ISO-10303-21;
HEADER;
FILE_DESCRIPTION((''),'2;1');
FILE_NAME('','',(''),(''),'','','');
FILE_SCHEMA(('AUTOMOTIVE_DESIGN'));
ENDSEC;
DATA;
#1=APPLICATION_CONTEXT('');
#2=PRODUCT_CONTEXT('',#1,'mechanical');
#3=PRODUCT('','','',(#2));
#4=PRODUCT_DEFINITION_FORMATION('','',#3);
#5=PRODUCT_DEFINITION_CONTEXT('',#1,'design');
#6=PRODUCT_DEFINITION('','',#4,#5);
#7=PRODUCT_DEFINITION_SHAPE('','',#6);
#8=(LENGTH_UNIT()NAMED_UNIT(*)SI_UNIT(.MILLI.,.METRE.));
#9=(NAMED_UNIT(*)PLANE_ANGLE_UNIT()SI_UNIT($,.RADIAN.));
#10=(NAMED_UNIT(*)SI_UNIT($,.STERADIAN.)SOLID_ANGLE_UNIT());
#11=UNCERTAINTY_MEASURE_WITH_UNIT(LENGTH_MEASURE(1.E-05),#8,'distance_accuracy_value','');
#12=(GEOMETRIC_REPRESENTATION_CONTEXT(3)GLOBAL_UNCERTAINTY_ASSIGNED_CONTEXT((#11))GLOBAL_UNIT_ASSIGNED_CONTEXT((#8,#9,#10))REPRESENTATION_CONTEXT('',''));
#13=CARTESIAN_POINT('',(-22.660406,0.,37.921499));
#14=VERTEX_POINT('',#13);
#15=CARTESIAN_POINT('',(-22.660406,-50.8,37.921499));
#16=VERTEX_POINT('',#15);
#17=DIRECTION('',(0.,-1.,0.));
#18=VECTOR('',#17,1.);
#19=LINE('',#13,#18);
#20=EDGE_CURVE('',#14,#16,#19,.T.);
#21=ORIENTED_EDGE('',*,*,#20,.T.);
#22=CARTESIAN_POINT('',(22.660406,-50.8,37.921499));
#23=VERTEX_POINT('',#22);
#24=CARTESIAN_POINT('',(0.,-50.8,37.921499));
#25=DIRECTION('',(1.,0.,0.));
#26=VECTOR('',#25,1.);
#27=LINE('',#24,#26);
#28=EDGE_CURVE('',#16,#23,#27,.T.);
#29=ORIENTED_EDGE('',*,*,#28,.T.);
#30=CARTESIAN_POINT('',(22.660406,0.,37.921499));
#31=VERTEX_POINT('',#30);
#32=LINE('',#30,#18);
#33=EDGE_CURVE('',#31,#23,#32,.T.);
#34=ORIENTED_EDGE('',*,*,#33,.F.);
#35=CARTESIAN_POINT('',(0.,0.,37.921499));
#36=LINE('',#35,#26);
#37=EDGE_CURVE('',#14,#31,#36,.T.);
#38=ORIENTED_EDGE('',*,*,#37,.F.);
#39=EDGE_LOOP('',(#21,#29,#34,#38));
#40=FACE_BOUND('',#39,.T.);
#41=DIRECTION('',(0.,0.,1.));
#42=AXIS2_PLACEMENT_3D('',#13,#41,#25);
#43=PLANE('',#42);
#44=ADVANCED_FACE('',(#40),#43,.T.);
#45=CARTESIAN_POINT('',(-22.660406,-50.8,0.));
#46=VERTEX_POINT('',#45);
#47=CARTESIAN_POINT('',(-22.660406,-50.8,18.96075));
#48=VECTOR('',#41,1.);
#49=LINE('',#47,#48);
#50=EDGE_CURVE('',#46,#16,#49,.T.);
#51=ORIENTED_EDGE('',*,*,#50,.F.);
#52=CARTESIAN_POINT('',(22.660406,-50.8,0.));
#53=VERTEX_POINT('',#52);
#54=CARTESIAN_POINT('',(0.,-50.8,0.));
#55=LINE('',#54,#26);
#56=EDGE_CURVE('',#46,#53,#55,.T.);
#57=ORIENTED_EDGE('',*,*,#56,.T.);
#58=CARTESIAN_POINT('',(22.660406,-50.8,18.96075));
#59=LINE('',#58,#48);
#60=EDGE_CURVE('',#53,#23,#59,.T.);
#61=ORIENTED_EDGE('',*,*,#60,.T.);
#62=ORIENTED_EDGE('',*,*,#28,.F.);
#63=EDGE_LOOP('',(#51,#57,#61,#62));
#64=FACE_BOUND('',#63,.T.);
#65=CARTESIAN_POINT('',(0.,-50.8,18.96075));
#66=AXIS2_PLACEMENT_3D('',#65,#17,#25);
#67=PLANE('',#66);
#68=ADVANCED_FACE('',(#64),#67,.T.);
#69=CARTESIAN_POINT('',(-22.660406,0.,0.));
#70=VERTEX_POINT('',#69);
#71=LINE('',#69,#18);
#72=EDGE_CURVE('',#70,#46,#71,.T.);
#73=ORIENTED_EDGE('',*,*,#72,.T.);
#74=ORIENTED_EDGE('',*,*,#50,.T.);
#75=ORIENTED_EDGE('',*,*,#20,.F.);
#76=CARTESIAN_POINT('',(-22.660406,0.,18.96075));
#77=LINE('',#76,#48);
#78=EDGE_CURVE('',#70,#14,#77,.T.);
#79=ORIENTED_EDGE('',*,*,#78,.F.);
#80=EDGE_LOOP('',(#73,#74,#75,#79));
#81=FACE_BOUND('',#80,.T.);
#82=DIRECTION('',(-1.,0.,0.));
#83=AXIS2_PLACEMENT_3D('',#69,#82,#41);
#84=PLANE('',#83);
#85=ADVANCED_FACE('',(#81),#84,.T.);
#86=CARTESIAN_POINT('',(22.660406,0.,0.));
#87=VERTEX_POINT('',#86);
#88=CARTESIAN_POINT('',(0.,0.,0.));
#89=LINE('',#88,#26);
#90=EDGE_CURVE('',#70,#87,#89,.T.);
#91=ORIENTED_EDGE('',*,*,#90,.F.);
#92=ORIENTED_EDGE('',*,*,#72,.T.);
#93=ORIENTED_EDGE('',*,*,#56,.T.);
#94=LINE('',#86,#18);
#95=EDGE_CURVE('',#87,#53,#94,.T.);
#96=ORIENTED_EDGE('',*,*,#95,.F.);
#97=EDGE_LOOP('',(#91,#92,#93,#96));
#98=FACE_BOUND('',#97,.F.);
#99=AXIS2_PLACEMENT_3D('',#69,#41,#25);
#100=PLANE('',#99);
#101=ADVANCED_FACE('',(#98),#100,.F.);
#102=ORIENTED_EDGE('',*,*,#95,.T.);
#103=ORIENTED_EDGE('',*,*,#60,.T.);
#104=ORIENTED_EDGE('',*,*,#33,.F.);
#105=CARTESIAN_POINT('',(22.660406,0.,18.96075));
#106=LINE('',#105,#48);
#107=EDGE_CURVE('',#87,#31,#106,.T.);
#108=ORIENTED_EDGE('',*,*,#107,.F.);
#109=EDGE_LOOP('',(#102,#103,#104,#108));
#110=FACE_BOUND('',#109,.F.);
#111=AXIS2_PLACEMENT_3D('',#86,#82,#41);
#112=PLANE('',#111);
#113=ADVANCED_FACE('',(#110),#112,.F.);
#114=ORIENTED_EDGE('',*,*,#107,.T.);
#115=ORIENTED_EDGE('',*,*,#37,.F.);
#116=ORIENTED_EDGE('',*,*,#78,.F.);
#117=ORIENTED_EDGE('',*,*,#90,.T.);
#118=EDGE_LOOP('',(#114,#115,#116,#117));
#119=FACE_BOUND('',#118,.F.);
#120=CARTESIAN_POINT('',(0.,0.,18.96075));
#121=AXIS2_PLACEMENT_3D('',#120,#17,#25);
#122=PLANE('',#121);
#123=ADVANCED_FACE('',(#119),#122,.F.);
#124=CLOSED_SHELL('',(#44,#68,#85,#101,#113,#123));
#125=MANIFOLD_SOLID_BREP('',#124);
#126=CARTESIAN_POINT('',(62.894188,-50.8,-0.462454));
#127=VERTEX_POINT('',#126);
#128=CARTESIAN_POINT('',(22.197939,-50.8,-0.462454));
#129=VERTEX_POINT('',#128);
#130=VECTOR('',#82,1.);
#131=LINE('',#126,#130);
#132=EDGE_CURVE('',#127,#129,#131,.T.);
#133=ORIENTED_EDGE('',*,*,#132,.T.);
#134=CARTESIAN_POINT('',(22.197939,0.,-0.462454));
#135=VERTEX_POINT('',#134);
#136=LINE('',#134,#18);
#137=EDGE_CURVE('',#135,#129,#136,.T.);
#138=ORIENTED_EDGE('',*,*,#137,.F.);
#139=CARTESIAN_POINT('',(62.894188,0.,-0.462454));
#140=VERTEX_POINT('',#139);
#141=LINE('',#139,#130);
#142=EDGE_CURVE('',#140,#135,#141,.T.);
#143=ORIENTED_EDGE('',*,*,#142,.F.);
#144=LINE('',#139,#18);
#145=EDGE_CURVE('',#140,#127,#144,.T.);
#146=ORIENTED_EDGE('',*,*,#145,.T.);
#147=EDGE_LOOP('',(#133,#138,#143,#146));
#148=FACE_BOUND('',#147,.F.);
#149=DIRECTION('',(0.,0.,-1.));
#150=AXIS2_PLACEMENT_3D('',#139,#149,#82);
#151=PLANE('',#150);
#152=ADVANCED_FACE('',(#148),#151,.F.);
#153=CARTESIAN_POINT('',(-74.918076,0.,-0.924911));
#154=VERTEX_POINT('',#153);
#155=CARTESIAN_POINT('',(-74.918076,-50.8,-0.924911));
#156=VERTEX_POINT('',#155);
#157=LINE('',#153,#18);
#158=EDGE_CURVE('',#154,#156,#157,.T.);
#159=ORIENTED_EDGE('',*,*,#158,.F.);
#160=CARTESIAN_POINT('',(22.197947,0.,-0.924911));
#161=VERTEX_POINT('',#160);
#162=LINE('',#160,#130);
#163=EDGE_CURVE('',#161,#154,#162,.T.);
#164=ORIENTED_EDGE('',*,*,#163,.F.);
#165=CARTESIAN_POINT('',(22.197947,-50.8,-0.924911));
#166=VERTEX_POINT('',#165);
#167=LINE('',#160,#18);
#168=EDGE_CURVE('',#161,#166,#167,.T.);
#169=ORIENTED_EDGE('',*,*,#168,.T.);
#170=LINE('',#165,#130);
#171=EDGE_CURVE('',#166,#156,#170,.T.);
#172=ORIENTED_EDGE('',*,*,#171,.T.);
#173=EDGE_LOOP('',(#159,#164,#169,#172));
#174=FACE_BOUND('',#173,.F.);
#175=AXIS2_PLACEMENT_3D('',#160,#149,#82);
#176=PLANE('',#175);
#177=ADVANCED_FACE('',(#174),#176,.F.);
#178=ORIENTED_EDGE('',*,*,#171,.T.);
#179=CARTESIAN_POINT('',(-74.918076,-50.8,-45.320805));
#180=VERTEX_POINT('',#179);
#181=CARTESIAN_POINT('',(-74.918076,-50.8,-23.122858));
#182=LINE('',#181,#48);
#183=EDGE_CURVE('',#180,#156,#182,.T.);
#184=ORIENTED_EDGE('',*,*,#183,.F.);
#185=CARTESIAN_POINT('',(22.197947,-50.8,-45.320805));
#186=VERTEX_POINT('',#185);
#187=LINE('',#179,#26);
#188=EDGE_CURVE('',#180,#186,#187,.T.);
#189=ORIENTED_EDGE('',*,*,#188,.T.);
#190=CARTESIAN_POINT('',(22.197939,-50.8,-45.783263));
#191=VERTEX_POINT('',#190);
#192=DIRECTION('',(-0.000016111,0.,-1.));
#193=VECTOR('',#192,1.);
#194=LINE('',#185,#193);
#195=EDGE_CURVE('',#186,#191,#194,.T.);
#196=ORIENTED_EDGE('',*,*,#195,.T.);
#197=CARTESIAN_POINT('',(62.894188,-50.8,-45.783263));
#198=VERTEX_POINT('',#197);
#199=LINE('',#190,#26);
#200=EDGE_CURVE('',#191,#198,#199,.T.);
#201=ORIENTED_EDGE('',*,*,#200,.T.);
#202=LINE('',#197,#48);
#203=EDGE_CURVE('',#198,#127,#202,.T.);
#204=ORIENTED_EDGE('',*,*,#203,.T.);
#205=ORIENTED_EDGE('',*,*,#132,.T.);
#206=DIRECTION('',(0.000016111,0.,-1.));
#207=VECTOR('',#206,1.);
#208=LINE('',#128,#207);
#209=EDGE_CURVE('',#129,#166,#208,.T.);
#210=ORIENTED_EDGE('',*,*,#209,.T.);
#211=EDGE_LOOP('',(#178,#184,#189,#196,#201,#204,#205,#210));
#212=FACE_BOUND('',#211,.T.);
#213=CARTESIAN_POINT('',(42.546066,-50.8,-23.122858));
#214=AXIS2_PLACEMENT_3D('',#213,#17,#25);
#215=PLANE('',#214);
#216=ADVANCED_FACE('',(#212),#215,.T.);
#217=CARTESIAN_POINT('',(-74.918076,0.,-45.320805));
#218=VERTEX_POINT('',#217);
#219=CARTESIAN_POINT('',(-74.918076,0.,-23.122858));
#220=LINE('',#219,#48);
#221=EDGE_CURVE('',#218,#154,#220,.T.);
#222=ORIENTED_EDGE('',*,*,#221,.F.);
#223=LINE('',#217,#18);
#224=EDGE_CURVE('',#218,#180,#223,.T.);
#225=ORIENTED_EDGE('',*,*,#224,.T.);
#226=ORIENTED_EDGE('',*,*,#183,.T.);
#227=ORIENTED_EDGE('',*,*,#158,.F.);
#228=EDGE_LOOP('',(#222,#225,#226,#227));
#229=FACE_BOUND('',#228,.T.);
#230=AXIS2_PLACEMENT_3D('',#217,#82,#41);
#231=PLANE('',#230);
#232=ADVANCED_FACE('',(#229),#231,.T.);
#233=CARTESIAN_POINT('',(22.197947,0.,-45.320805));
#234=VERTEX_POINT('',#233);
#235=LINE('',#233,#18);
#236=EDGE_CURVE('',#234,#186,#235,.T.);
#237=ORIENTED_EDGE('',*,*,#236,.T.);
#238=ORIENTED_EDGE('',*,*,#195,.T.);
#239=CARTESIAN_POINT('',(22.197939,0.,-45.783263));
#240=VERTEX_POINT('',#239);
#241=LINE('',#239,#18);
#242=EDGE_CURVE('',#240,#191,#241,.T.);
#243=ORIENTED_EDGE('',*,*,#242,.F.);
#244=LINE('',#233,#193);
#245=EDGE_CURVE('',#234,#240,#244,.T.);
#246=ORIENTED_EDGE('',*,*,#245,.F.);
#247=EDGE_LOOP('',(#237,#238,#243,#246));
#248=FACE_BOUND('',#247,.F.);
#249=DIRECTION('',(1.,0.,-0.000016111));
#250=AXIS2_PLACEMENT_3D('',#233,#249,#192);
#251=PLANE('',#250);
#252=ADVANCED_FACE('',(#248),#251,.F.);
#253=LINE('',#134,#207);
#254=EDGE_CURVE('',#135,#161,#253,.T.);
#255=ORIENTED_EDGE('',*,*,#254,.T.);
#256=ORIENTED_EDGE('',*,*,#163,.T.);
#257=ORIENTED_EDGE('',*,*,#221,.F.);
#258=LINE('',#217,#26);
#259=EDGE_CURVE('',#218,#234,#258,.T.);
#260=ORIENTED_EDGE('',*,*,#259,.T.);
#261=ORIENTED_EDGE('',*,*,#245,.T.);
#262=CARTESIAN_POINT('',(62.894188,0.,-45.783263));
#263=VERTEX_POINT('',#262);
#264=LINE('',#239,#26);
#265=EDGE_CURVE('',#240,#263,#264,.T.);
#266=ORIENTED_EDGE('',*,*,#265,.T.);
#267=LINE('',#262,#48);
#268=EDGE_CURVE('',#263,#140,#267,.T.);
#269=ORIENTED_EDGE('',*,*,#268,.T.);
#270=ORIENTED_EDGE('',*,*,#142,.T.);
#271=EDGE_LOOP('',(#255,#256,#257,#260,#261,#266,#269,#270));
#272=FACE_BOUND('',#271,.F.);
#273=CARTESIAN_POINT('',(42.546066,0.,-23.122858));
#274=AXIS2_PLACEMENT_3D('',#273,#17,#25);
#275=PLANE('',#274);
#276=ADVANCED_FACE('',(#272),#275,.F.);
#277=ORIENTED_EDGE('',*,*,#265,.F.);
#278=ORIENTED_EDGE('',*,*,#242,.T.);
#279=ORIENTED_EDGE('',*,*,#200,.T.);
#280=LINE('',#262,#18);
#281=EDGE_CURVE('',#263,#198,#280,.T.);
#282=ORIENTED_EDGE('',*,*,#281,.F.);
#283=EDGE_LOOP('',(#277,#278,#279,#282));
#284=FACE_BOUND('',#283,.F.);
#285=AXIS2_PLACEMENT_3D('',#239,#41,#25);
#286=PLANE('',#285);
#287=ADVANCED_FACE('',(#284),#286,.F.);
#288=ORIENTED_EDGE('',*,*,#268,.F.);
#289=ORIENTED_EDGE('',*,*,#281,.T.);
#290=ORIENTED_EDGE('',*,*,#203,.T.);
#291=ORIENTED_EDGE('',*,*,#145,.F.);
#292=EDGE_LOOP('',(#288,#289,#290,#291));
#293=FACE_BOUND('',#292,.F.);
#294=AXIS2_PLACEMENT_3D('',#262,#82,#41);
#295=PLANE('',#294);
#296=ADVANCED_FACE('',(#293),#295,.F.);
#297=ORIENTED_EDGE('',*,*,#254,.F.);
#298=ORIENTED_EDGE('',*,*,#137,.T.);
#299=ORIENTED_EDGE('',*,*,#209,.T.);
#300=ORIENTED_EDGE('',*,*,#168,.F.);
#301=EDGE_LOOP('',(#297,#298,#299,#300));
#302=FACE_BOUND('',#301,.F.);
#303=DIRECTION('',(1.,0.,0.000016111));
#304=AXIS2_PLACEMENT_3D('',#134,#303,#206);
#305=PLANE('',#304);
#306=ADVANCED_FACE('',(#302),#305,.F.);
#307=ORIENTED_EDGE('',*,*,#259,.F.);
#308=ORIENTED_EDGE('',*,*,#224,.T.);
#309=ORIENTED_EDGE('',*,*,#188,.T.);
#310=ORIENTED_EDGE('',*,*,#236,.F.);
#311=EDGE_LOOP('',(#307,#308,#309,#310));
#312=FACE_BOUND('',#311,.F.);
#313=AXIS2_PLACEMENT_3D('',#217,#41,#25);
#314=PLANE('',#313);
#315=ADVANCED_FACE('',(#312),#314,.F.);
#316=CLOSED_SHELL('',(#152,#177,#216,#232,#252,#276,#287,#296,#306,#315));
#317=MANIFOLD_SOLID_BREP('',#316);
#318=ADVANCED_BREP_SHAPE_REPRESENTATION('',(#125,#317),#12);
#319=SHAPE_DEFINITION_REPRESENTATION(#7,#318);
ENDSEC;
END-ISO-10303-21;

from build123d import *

# Parameters (mm, degrees)
F0_W     = 44.3958938122
F0_H     = 44.3958938122
F0_W_2   = 52.7201294899
F1_DEPTH = 50.8
F0_W_3   = 45.3208126128
F0_H_2   = 37.9214994609


# Not quite as in the source:
# - ends of sketch curves that miss each other by under 0.0002 mm in the source are joined


with BuildPart() as f1:
    # F0 (on Front) → F1 (new body)
    with BuildSketch(Plane.XZ):
        Polygon((22.1979469061, -0.92491135), (22.1979469061, -45.3208051622), (22.1979394555, -45.7832626998), (62.8941878676, -45.7832626998), (62.8941878676, -0.4624538124), (22.1979394555, -0.4624538124), align=None)
        with Locations((0, -23.1228582561)):
            Rectangle(F0_W, F0_H)
        with Locations((-48.558011651, -23.1228582561)):
            Rectangle(F0_W_2, F0_H)
    extrude(amount=F1_DEPTH)


with BuildPart() as f1b:
    # F0 (on Front) → F1, piece 2 (new body)
    with BuildSketch(Plane.XZ):
        with Locations((0, 18.9607497305)):
            Rectangle(F0_W_3, F0_H_2)
    extrude(amount=F1_DEPTH)


solid = Compound([f1.part, f1b.part])
